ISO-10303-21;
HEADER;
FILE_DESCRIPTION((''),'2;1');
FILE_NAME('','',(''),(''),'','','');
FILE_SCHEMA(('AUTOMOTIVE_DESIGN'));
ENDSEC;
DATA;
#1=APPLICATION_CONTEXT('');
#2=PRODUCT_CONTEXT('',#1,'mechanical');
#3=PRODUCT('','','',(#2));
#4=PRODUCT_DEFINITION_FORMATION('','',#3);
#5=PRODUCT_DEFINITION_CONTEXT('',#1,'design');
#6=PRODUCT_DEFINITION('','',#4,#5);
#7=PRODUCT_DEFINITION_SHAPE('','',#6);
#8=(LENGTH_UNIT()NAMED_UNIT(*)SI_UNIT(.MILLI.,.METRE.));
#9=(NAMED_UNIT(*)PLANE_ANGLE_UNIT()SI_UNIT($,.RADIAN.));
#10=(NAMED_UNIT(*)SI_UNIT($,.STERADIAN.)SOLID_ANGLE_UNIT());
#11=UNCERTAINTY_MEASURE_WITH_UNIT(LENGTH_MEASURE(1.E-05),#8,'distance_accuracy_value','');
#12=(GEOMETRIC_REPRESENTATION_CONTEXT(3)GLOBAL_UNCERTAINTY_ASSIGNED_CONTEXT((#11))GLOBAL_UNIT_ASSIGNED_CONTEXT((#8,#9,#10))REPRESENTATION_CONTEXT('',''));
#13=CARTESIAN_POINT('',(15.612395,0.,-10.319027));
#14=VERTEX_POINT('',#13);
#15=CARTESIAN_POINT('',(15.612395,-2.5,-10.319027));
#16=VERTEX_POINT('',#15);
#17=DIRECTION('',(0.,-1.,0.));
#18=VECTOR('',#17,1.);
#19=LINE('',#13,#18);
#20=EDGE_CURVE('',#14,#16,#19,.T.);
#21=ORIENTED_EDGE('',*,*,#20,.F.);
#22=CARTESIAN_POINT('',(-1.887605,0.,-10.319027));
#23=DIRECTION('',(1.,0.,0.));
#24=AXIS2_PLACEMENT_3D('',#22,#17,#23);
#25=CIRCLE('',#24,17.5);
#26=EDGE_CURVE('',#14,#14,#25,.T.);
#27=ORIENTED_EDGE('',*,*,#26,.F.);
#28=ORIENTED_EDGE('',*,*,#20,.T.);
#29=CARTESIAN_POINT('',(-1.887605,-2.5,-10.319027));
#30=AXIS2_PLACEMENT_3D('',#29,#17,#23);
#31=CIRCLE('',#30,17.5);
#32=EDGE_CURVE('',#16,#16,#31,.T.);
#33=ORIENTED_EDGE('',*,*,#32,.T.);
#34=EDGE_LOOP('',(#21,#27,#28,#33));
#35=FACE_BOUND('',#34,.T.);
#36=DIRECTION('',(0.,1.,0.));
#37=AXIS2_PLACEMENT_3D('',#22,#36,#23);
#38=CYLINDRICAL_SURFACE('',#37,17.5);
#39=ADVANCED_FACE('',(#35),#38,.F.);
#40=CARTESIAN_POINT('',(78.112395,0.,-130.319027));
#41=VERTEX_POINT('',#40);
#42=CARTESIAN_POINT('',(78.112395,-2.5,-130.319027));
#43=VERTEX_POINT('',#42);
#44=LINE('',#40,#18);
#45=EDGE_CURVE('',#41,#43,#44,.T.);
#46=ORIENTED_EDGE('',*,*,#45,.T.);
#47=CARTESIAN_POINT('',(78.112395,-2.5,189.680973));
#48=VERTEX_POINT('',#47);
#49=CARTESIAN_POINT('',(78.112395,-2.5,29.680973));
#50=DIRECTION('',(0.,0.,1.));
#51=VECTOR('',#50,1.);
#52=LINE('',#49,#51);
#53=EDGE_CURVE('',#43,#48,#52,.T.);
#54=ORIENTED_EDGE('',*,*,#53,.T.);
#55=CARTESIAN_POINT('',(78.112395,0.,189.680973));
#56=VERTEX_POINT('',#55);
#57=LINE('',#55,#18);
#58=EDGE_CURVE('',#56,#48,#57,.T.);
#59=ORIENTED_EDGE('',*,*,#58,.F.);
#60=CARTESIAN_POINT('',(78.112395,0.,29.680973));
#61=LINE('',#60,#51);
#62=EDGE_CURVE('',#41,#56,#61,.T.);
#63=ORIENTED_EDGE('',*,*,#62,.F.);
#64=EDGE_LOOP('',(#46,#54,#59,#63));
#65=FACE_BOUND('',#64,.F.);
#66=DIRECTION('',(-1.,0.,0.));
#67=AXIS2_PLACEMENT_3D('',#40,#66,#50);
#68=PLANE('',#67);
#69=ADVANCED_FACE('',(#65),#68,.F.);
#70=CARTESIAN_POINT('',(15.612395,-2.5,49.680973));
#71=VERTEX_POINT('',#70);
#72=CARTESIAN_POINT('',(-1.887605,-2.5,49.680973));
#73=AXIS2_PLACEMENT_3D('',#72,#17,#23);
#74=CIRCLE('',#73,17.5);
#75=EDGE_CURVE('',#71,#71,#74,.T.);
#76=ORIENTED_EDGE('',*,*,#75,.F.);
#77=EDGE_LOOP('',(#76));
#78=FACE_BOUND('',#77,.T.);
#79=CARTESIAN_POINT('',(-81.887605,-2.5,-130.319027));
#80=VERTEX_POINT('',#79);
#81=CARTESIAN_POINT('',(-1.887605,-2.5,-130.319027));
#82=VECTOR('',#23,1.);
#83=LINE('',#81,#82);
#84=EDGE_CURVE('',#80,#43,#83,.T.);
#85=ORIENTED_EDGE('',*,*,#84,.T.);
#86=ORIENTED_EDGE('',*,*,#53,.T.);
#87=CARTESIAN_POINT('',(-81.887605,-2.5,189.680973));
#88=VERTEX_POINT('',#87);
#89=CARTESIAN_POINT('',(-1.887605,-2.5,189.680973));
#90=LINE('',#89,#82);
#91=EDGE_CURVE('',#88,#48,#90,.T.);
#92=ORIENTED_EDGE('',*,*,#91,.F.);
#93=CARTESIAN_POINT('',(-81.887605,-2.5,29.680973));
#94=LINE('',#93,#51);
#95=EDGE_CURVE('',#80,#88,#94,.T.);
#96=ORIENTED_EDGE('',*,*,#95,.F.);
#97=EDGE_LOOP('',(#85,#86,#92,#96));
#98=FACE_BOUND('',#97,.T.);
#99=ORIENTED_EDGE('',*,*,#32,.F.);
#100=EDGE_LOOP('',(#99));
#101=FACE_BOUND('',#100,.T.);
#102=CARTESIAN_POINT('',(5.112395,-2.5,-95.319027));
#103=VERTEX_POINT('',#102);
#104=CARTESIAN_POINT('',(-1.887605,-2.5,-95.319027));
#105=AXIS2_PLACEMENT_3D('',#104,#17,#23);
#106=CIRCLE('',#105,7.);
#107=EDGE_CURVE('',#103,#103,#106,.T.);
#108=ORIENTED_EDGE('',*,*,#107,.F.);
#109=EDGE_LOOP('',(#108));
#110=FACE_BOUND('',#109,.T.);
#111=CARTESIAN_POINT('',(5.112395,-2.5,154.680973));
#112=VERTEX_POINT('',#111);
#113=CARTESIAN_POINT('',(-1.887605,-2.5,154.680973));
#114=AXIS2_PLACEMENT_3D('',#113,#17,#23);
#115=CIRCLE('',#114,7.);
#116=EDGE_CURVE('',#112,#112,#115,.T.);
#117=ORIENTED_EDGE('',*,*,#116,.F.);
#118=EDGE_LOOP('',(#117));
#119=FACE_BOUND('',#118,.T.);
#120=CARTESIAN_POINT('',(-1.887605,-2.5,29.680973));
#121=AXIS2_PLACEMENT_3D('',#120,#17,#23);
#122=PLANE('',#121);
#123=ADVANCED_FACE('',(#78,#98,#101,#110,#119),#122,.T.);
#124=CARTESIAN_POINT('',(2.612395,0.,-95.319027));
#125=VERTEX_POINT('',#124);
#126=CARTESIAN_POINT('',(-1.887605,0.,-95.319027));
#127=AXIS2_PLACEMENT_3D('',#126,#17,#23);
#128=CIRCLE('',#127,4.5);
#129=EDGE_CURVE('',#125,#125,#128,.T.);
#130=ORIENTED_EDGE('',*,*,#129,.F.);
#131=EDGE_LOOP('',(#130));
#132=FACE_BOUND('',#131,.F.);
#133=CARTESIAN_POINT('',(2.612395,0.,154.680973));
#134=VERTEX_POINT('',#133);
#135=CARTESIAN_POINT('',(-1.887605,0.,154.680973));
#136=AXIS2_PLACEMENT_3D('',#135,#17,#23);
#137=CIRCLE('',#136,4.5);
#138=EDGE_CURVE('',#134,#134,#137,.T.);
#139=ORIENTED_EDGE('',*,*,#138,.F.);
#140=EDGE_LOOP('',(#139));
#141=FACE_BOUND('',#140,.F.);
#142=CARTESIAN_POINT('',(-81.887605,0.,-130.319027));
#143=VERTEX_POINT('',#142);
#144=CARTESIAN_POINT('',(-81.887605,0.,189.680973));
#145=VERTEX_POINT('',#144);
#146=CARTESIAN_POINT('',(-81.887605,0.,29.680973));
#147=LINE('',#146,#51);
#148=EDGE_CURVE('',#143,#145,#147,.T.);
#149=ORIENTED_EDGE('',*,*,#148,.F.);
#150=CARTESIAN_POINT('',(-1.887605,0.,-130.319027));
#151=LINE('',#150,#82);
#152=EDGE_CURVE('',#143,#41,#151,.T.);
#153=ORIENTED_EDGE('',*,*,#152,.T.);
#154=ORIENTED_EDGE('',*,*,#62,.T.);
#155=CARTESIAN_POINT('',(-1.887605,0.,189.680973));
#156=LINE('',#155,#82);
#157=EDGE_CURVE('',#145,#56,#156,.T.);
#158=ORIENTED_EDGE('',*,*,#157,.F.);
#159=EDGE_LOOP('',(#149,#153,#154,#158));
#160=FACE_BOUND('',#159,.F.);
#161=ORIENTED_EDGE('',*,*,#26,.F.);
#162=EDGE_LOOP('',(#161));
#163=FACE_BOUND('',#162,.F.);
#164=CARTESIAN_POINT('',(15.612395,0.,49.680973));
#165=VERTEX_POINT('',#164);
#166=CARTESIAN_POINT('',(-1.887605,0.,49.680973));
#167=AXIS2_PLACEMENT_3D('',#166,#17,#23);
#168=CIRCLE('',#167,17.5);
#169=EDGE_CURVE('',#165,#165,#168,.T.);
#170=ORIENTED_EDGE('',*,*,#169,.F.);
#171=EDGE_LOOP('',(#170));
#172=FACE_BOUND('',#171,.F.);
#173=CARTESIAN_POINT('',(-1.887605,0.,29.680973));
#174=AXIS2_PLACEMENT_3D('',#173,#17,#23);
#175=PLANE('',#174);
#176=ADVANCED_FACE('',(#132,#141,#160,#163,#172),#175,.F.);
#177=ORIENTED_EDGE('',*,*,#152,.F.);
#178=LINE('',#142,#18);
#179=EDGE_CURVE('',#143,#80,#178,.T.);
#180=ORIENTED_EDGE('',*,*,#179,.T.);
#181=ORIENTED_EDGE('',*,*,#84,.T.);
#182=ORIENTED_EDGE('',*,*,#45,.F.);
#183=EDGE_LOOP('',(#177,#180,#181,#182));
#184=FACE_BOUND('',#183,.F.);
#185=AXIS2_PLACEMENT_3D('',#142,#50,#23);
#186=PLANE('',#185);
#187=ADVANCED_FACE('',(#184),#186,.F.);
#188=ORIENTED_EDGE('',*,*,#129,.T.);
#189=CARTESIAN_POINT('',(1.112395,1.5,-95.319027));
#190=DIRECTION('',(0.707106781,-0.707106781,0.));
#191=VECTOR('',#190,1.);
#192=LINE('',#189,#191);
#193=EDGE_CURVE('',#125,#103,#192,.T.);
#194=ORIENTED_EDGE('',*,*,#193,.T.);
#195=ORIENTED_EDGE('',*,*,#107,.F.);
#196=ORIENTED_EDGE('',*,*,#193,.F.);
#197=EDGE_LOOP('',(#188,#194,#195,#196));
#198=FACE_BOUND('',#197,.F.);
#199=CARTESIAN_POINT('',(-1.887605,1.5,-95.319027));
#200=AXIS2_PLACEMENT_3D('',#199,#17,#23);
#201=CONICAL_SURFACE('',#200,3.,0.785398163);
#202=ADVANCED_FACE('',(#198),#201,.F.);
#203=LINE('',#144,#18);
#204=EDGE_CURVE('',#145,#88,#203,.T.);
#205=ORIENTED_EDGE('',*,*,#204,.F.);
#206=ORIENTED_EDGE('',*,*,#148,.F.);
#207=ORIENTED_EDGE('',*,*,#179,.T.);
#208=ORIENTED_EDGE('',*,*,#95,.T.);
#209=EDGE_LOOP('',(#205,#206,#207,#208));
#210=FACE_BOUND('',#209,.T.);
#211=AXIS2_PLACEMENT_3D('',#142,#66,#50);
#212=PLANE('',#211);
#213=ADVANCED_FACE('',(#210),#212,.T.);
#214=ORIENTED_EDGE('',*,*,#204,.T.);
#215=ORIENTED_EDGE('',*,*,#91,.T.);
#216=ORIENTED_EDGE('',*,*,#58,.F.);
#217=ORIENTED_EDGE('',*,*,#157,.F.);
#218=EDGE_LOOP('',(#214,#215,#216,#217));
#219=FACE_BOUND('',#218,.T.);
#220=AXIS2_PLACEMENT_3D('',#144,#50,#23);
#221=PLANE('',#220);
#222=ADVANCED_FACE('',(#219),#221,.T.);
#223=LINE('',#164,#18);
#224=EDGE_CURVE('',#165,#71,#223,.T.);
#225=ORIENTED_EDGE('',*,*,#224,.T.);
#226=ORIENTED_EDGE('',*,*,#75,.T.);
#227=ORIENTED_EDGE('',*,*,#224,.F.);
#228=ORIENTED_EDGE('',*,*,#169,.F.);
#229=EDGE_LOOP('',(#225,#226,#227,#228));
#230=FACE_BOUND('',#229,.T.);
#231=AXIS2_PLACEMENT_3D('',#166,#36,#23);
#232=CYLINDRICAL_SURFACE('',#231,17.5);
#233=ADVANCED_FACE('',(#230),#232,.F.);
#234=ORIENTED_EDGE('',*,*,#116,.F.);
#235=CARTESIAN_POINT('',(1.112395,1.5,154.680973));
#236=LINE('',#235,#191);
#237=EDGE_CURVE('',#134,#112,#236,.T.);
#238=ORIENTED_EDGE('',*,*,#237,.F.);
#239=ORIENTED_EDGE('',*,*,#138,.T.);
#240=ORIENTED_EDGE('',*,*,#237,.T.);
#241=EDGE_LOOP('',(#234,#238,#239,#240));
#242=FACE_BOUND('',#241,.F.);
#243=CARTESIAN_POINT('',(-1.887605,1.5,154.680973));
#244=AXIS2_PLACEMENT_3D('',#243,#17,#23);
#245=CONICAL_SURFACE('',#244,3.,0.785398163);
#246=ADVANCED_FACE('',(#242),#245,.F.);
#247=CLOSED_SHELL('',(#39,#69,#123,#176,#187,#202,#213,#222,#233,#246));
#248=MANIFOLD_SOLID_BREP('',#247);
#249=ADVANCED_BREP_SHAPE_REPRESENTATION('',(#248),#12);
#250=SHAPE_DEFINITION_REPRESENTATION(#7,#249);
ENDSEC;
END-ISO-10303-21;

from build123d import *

# Parameters (mm, degrees)
F0_W     = 160
F0_H     = 320
F0_R     = 3
F0_R_2   = 17.5
F1_DEPTH = 2.5


# Not quite as in the source:
# - a fillet or chamfer that OpenCascade refuses, or shapes differently, is made with other operations: its cross-section is extruded or revolved along the edge and cut away or added


with BuildPart() as f1:
    # F0 (on Front) → F1 (new body)
    with BuildSketch(Plane.XZ):
        with Locations((-1.8876045942, 29.6809725389)):
            Rectangle(F0_W, F0_H)
        with Locations((-1.8876045942, -95.3190274611)):
            Circle(F0_R, mode=Mode.SUBTRACT)
        with Locations((-1.8876045942, -10.3190274611)):
            Circle(F0_R_2, mode=Mode.SUBTRACT)
        with Locations((-1.8876045942, 49.6809725389)):
            Circle(F0_R_2, mode=Mode.SUBTRACT)
        with Locations((-1.8876045942, 154.6809725389)):
            Circle(F0_R, mode=Mode.SUBTRACT)
    extrude(amount=F1_DEPTH)

    # F2: chamfer of 4 on 2 edges, made by hand

    # F2_s1 → F2_t2 (revolve, cut)
    with BuildSketch(Plane.XY.offset(154.6809725389)):
        Polygon((1.1123954058, 1.5), (5.1123954058, -2.5), (1.1123954058, -2.5), align=None)
    revolve(axis=Axis((-1.8876045942, -2.5, 154.6809725389), (0, -1, 0)), mode=Mode.SUBTRACT)

    # F2_s3 → F2_t4 (revolve, cut)
    with BuildSketch(Plane.XY.offset(-95.3190274611)):
        Polygon((1.1123954058, 1.5), (5.1123954058, -2.5), (1.1123954058, -2.5), align=None)
    revolve(axis=Axis((-1.8876045942, -2.5, -95.3190274611), (0, -1, 0)), mode=Mode.SUBTRACT)


solid = f1.part
